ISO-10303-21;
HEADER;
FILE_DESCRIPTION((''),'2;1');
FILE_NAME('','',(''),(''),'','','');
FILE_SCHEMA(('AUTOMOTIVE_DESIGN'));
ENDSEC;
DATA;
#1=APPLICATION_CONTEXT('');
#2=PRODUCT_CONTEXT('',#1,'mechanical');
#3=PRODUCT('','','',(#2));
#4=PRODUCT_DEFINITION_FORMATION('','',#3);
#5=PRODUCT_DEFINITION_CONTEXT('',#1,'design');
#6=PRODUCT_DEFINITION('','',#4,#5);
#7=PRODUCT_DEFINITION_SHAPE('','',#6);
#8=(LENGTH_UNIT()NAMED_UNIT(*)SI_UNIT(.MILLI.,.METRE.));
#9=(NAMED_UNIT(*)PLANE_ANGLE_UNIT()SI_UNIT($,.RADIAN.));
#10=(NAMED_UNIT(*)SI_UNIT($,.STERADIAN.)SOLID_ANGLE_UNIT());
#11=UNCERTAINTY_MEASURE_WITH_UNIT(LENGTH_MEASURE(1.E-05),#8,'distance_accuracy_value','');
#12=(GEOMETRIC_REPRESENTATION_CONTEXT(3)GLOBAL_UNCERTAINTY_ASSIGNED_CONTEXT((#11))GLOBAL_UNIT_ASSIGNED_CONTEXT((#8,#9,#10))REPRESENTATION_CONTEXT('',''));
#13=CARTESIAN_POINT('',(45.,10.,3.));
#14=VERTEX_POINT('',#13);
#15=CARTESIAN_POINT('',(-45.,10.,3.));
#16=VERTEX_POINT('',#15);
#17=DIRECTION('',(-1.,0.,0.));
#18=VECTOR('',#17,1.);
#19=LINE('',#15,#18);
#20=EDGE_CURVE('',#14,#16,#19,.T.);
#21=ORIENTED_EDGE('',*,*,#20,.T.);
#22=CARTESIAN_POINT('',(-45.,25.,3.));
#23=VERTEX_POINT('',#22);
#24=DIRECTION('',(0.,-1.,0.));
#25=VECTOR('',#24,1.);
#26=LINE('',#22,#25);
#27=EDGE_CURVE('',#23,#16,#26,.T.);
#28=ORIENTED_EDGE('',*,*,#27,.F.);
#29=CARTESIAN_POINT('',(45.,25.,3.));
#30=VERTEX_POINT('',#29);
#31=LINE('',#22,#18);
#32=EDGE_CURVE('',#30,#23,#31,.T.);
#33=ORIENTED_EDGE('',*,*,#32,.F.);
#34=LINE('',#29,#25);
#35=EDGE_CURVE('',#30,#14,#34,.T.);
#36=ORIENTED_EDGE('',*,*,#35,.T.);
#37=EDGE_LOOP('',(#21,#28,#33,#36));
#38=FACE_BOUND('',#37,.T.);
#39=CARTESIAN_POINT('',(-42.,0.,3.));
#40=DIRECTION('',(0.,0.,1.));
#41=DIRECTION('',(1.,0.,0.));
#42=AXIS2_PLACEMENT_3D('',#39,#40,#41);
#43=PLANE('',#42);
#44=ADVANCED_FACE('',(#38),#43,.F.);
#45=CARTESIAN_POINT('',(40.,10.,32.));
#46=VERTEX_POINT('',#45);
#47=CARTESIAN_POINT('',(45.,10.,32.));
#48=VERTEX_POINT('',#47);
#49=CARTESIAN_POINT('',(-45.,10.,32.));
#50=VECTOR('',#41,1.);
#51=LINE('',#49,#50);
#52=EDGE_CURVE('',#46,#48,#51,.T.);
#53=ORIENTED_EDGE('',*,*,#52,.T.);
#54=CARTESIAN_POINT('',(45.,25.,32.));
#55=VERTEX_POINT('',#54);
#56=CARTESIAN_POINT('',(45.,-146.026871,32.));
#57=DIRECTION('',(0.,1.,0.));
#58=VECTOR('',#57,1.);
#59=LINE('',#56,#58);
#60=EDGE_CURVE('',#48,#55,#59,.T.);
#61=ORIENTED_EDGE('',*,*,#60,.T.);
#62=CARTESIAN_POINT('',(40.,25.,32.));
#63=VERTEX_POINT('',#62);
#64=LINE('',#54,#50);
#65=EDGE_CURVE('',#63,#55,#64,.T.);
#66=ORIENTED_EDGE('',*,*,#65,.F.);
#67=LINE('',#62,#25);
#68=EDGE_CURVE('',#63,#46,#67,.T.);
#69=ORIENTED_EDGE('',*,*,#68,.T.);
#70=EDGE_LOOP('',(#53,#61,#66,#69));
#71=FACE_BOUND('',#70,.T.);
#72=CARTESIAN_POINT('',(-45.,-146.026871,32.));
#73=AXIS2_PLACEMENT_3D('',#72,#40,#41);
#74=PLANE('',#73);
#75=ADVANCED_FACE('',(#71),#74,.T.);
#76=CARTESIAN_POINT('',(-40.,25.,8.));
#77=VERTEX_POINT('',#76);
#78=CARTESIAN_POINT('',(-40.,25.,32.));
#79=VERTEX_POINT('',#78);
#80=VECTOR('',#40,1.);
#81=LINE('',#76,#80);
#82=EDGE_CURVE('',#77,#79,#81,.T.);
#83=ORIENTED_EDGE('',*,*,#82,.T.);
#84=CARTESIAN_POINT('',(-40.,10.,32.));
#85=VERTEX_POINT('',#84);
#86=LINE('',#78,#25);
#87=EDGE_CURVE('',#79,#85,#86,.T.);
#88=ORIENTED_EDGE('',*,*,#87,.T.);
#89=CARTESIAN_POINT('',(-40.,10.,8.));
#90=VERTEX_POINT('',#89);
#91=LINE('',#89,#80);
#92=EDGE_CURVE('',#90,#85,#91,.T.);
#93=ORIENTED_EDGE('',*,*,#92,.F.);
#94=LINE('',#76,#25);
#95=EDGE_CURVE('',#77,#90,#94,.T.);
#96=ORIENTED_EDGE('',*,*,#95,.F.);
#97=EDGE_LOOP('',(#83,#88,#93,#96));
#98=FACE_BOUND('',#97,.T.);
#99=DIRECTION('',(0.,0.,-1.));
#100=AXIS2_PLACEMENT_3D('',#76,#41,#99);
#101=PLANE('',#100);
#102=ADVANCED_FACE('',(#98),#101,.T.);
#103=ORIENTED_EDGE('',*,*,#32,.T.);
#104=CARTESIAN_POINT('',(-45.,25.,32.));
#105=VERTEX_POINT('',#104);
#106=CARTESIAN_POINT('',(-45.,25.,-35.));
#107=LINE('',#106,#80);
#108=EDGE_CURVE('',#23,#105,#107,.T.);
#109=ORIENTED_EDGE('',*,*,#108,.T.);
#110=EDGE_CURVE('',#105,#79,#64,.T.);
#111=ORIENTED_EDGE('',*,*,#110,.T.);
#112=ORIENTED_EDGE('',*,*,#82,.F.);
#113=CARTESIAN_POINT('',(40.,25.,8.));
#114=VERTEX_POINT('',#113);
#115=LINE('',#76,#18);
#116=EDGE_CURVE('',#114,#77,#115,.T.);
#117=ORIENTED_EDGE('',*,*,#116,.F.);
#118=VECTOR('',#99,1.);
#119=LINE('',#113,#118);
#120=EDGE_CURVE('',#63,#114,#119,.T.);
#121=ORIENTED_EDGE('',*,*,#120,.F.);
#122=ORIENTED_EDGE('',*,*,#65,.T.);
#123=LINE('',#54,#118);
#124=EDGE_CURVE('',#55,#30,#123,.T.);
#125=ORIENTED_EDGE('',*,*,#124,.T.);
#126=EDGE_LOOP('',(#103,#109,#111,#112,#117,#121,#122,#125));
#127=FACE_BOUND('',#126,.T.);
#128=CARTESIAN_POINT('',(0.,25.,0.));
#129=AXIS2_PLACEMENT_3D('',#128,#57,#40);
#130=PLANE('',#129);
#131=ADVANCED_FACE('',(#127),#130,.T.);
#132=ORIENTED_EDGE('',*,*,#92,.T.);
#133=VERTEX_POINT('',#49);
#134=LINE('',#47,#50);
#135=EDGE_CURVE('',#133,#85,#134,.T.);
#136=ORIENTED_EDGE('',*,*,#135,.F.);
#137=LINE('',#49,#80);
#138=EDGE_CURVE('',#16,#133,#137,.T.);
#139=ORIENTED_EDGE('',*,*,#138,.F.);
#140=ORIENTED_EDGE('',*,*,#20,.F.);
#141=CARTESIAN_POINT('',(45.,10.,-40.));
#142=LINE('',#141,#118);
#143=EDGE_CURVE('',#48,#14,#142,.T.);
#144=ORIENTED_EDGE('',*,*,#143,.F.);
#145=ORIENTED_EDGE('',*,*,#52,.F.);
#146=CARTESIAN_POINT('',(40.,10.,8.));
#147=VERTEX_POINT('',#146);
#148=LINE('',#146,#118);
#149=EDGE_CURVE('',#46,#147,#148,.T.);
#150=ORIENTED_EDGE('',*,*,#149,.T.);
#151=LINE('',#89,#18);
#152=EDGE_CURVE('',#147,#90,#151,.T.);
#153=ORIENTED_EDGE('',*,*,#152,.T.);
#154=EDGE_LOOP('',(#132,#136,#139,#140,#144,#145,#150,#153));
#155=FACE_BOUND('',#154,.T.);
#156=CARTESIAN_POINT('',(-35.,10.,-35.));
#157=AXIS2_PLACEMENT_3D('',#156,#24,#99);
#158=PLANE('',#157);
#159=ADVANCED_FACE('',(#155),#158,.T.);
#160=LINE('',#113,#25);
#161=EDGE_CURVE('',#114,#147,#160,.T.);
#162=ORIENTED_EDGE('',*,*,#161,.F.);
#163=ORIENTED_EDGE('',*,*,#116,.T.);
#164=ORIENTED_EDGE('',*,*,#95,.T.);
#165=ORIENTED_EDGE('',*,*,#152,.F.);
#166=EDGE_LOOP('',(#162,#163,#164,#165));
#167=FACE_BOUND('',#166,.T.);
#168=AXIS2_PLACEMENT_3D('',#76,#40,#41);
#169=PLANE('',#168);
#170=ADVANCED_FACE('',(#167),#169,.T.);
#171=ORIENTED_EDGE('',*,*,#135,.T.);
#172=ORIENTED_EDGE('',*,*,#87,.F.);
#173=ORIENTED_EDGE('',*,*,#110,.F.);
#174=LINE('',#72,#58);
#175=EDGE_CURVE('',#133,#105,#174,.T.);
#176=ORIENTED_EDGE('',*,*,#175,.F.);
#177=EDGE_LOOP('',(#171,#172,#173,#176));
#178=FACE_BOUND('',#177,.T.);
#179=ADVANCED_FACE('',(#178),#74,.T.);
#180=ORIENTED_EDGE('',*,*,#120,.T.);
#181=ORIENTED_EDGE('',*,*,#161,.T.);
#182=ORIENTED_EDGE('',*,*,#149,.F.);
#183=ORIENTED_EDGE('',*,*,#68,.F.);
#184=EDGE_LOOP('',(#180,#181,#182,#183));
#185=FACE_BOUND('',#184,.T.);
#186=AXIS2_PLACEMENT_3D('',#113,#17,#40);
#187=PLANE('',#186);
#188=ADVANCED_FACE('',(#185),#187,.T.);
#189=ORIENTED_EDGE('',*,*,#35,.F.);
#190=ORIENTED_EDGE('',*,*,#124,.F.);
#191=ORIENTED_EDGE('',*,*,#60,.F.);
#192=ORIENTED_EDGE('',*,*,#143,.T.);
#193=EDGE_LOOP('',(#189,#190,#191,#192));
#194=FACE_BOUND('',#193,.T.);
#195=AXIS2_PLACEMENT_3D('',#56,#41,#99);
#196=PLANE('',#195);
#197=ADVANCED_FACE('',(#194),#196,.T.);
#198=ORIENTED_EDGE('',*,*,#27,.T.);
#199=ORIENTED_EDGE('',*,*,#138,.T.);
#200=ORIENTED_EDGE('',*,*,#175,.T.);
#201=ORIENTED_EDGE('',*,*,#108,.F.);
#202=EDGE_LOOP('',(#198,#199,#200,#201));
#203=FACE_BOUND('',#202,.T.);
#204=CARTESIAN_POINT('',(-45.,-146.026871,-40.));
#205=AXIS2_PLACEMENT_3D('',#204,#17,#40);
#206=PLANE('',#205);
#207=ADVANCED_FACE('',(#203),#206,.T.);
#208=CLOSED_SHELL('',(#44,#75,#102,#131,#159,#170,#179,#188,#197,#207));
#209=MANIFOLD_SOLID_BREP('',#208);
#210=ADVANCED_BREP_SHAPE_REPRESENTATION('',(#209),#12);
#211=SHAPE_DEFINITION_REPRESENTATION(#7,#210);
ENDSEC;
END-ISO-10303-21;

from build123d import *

# Parameters (mm, degrees)
BOSS_EXTRUDE1_DEPTH     = 10
SKETCH2_W               = 17.2
SKETCH2_H               = 43
CUT_EXTRUDE1_DEPTH      = 72.414284285
SKETCH3_W               = 90
SKETCH3_H               = 34
SKETCH3_W_2             = 80
SKETCH3_H_2             = 24
BOSS_EXTRUDE3_DEPTH     = 15
SKETCH4_W               = 49.6
SKETCH4_H               = 5
BOSS_EXTRUDE4_DEPTH     = 10
SKETCH5_W               = 15
SKETCH5_H               = 22
BOSS_EXTRUDE5_DEPTH     = 5
SKETCH6_W               = 90
SKETCH6_H               = 77
BOSS_EXTRUDE6_DEPTH     = 15
BOSS_EXTRUDE8_DEPTH     = 39
CHAMFER1_SIZE           = 64
CHAMFER1_SIZE_2         = 3.354097874
CHAMFER2_SIZE           = 64
CHAMFER2_SIZE_2         = 11.405813635
CHAMFER3_SIZE           = 64
CHAMFER3_SIZE_2         = 13.775745352
CUT_EXTRUDE3_DEPTH      = 95.500525601
CUT_EXTRUDE3_DEPTH_BACK = 95.500525601
SKETCH10_W              = 50
SKETCH10_H              = 27
SKETCH11_W              = 45.5
SKETCH11_H              = 10.5
CUT_EXTRUDE4_DEPTH      = 7.5
SKETCH14_W              = 2.05
SKETCH14_H              = 10.5
BOSS_EXTRUDE9_DEPTH     = 15
SKETCH15_R              = 8
CUT_EXTRUDE5_DEPTH      = 122.227059686
CUT_EXTRUDE6_DEPTH      = 2.5
CUT_EXTRUDE7_REACH      = 97.373
SKETCH18_W              = 29.6
SKETCH18_H              = 45
CUT_EXTRUDE8_DEPTH      = 15
SKETCH21_W              = 29.6
SKETCH21_H              = 15
BOSS_EXTRUDE10_DEPTH    = 2.5
SKETCH22_OUTSIDE_W      = 133.046
SKETCH22_OUTSIDE_H      = 133.046
SKETCH22_OUTSIDE_W_2    = 90
SKETCH22_OUTSIDE_H_2    = 72
CUT_EXTRUDE9_DEPTH      = 64
CUT_EXTRUDE10_DEPTH     = 10


with BuildPart() as part:
    # Sketch1 → Boss-Extrude1 (new body)
    with BuildSketch(Plane(origin=(0, 0, 0), x_dir=(1, 0, 0), z_dir=(0, 1, 0))):
        with BuildLine():
            Line((-35, 50), (35, 50))
            ThreePointArc((35, 50), (45.606601718, 45.606601718), (50, 35))
            Line((50, 35), (50, -35))
            ThreePointArc((50, -35), (45.606601718, -45.606601718), (35, -50))
            Line((35, -50), (-35, -50))
            ThreePointArc((-35, -50), (-45.606601718, -45.606601718), (-50, -35))
            Line((-50, -35), (-50, 35))
            ThreePointArc((-50, 35), (-45.606601718, 45.606601718), (-35, 50))
        make_face()
    extrude(amount=BOSS_EXTRUDE1_DEPTH)

    # Sketch2 → Cut-Extrude1 (cut, through all)
    with BuildSketch(Plane(origin=(0, 10, 0), x_dir=(1, 0, 0), z_dir=(0, 1, 0))):
        with Locations((-33.4, 18.5)):
            Rectangle(SKETCH2_W, SKETCH2_H)
        with Locations((33.4, 18.5)):
            Rectangle(SKETCH2_W, SKETCH2_H)
    extrude(amount=-CUT_EXTRUDE1_DEPTH, mode=Mode.SUBTRACT)

    # Sketch3 → Boss-Extrude3 (add)
    with BuildSketch(Plane(origin=(0, 10, 0), x_dir=(1, 0, 0), z_dir=(0, 1, 0))):
        with Locations((0, -20)):
            Rectangle(SKETCH3_W, SKETCH3_H)
        with Locations((0, -20)):
            Rectangle(SKETCH3_W_2, SKETCH3_H_2, mode=Mode.SUBTRACT)
    extrude(amount=BOSS_EXTRUDE3_DEPTH)

    # Sketch4 → Boss-Extrude4 (add)
    with BuildSketch(Plane(origin=(0, 10, 0), x_dir=(1, 0, 0), z_dir=(0, 1, 0))):
        with Locations((0, 10)):
            Rectangle(SKETCH4_W, SKETCH4_H)
        with Locations((0, 27)):
            Rectangle(SKETCH4_W, SKETCH4_H)
    extrude(amount=BOSS_EXTRUDE4_DEPTH)

    # Sketch5 → Boss-Extrude5 (add)
    with BuildSketch(Plane(origin=(0, 20, 0), x_dir=(1, 0, 0), z_dir=(0, 1, 0))):
        with Locations((-17.3, 18.5)):
            Rectangle(SKETCH5_W, SKETCH5_H)
        with Locations((17.3, 18.5)):
            Rectangle(SKETCH5_W, SKETCH5_H)
    extrude(amount=BOSS_EXTRUDE5_DEPTH)

    # Sketch6 → Boss-Extrude6 (add)
    with BuildSketch(Plane(origin=(0, 10, 0), x_dir=(1, 0, 0), z_dir=(0, 1, 0))):
        with BuildLine():
            Line((-50, 35), (-50, -35))
            ThreePointArc((-50, -35), (-45.606601718, -45.606601718), (-35, -50))
            Line((-35, -50), (35, -50))
            ThreePointArc((35, -50), (45.606601718, -45.606601718), (50, -35))
            Line((50, -35), (50, 35))
            ThreePointArc((50, 35), (45.606601718, 45.606601718), (35, 50))
            Line((35, 50), (-35, 50))
            ThreePointArc((-35, 50), (-45.606601718, 45.606601718), (-50, 35))
        make_face()
        with Locations((0, 1.5)):
            Rectangle(SKETCH6_W, SKETCH6_H, mode=Mode.SUBTRACT)
    extrude(amount=BOSS_EXTRUDE6_DEPTH)

    # Sketch9 → Boss-Extrude8 (add)
    with BuildSketch(Plane(origin=(0, 25, 0), x_dir=(1, 0, 0), z_dir=(0, 1, 0))):
        with BuildLine():
            Line((-50, 35), (-50, -35))
            ThreePointArc((-50, -35), (-45.606601718, -45.606601718), (-35, -50))
            Line((-35, -50), (35, -50))
            ThreePointArc((35, -50), (45.606601718, -45.606601718), (50, -35))
            Line((50, -35), (50, 35))
            ThreePointArc((50, 35), (45.606601718, 45.606601718), (35, 50))
            Line((35, 50), (-35, 50))
            ThreePointArc((-35, 50), (-45.606601718, 45.606601718), (-50, 35))
        make_face()
        with BuildLine():
            Line((-45, 35), (-45, -32))
            Line((-45, -32), (45, -32))
            Line((45, -32), (45, 35))
            ThreePointArc((45, 35), (44.659258263, 37.588190451), (43.660254038, 40))
            Line((43.660254038, 40), (-43.660254038, 40))
            ThreePointArc((-43.660254038, 40), (-44.659258263, 37.588190451), (-45, 35))
        make_face(mode=Mode.SUBTRACT)
    extrude(amount=BOSS_EXTRUDE8_DEPTH)

    # Chamfer1
    # the kernel refuses this chamfer: 64, 3.354097874 mm, written as the material it takes off along each edge
    with BuildSketch(Plane(origin=(-35, 64, 50), x_dir=(0, -0.9999979738662979, 0.002013023422382214), z_dir=(1, 0, 0)), Plane(origin=(50, 64, 35), x_dir=(0.002013023422382214, -0.9999979738662979, 0), z_dir=(0, 0, -1)), Plane(origin=(-50, 64, -35), x_dir=(-0.002013023422382214, -0.9999979738662979, 0), z_dir=(0, 0, 1)), Plane(origin=(35, 64, -50), x_dir=(0, -0.9999979738662979, -0.002013023422382214), z_dir=(-1, 0, 0))) as chamfer1_piece_1:
        Polygon((CHAMFER1_SIZE * 0.999997973866, CHAMFER1_SIZE * 0.00201302342238), (-CHAMFER1_SIZE_2 * 0.00201302342245, CHAMFER1_SIZE_2 * 0.9999979739), (0, 0), align=None)
    extrude(amount=70, mode=Mode.SUBTRACT)
    with BuildSketch(Plane(origin=(35, 64, 35), x_dir=(0, 0, 1), z_dir=(-1, 0, 0))) as chamfer1_piece_2:
        Polygon((15, -CHAMFER1_SIZE), (15 - CHAMFER1_SIZE_2, 0), (15, 0), align=None)
    revolve(axis=Axis((35, 64, 35), (0, 1, 0)), revolution_arc=90, mode=Mode.SUBTRACT)
    with BuildSketch(Plane(origin=(-35, 64, 35), x_dir=(-1, 0, 0), z_dir=(0, 0, -1))) as chamfer1_piece_3:
        Polygon((15, -CHAMFER1_SIZE), (15 - CHAMFER1_SIZE_2, 0), (15, 0), align=None)
    revolve(axis=Axis((-35, 64, 35), (0, 1, 0)), revolution_arc=90, mode=Mode.SUBTRACT)
    with BuildSketch(Plane(origin=(35, 64, -35), x_dir=(1, 0, 0), z_dir=(0, 0, 1))) as chamfer1_piece_4:
        Polygon((15, -CHAMFER1_SIZE), (15 - CHAMFER1_SIZE_2, 0), (15, 0), align=None)
    revolve(axis=Axis((35, 64, -35), (0, 1, 0)), revolution_arc=90, mode=Mode.SUBTRACT)
    with BuildSketch(Plane(origin=(-35, 64, -35), x_dir=(0, 0, -1), z_dir=(1, 0, 0))) as chamfer1_piece_5:
        Polygon((15 - CHAMFER1_SIZE_2, 0), (15, -CHAMFER1_SIZE), (15, 0), align=None)
    revolve(axis=Axis((-35, 64, -35), (0, 1, 0)), revolution_arc=90, mode=Mode.SUBTRACT)

    # Chamfer2
    # the kernel refuses this chamfer: 64, 11.405813635 mm, written as the material it takes off along each edge
    with BuildSketch(Plane(origin=(201.306482971, 64, -46.645902126), x_dir=(0, -0.9982575003065525, -0.05900816114499234), z_dir=(-1, 0, 0))) as chamfer2_piece_1:
        Polygon((CHAMFER2_SIZE * 0.999977671636, CHAMFER2_SIZE * 0.0066825316561), (-CHAMFER2_SIZE_2 * 0.0590081611462, CHAMFER2_SIZE_2 * 0.998257500326), (0, 0), align=None)
    extrude(amount=402.612965942, mode=Mode.SUBTRACT)

    # Chamfer3
    # the kernel refuses this chamfer: 64, 13.775745352 mm, written as the material it takes off along each edge
    with BuildSketch(Plane(origin=(-201.265469314, 64, 46.645902126), x_dir=(0, -0.9981787050157903, 0.06032638604292662), z_dir=(1, 0, 0))) as chamfer3_piece_1:
        Polygon((CHAMFER3_SIZE * 0.999967974892, CHAMFER3_SIZE * 0.00800307379952), (-CHAMFER3_SIZE_2 * 0.060326386045, CHAMFER3_SIZE_2 * 0.99817870505), (0, 0), align=None)
    extrude(amount=402.530938629, mode=Mode.SUBTRACT)

    # Sketch10 → Cut-Extrude3 (cut, two sides: drawn at the far end of the back side and taken through both)
    with BuildSketch(Plane(origin=(0, 1.307501734, 0), x_dir=(0, 0, 1), z_dir=(-1, 0, 0)).offset(-CUT_EXTRUDE3_DEPTH_BACK)):
        with Locations((-22.129843227, 49.192498266)):
            Rectangle(SKETCH10_W, SKETCH10_H)
    extrude(amount=CUT_EXTRUDE3_DEPTH + CUT_EXTRUDE3_DEPTH_BACK, mode=Mode.SUBTRACT)

    # Sketch11 → Cut-Extrude4 (cut)
    with BuildSketch(Plane(origin=(0, 10, 0), x_dir=(1, 0, 0), z_dir=(0, 1, 0))):
        with Locations((0, 34.75)):
            Rectangle(SKETCH11_W, SKETCH11_H)
    extrude(amount=-CUT_EXTRUDE4_DEPTH, mode=Mode.SUBTRACT)

    # Sketch14 → Boss-Extrude9 (add)
    with BuildSketch(Plane(origin=(0, 10, 0), x_dir=(1, 0, 0), z_dir=(0, 1, 0))):
        with Locations((-23.775, 34.75)):
            Rectangle(SKETCH14_W, SKETCH14_H)
        with Locations((23.775, 34.75)):
            Rectangle(SKETCH14_W, SKETCH14_H)
    extrude(amount=BOSS_EXTRUDE9_DEPTH)

    # Sketch15 → Cut-Extrude5 (cut, through all)
    with BuildSketch(Plane.XY.offset(-40)):
        with Locations((-12.75, 12.75)):
            Circle(SKETCH15_R)
        with Locations((12.75, 12.75)):
            Circle(SKETCH15_R)
    extrude(amount=-CUT_EXTRUDE5_DEPTH, mode=Mode.SUBTRACT)

    # Sketch17 → Cut-Extrude6 (cut)
    with BuildSketch(Plane(origin=(0, 0, -29.5), x_dir=(-1, 0, 0), z_dir=(0, 0, -1))):
        Polygon((-9.8, 25), (-22.75, 25), (-22.75, 2.5), (22.75, 2.5), (22.75, 25), (9.8, 25), (9.8, 20), (-9.8, 20), align=None)
    extrude(amount=-CUT_EXTRUDE6_DEPTH, mode=Mode.SUBTRACT)

    # Cut-Extrude7: up to this face of the body (flat: up to its plane)
    cut_extrude7_end = Plane(part.part.faces().sort_by_distance((0, 10, -18.5))[0])
    # Sketch18 → Cut-Extrude7 (cut, up to the picked face)
    with BuildSketch(Plane.XZ, mode=Mode.PRIVATE) as cut_extrude7_sk1:
        with Locations((0, -4.5)):
            Rectangle(SKETCH18_W, SKETCH18_H)
    cut_extrude7_tool1 = split(extrude(cut_extrude7_sk1.sketch, amount=-CUT_EXTRUDE7_REACH, mode=Mode.PRIVATE), bisect_by=cut_extrude7_end, keep=Keep.BOTH, mode=Mode.PRIVATE)
    add(cut_extrude7_tool1.solids().sort_by(Axis((0, 0, -4.5), (0, 1, 0)))[0], mode=Mode.SUBTRACT)

    # Sketch20 → Cut-Extrude8 (cut)
    with BuildSketch(Plane.XZ.offset(-25)):
        with BuildLine():
            Line((-45, -35), (-45, -40))
            Line((-45, -40), (-43.660254038, -40))
            ThreePointArc((-43.660254038, -40), (-44.659258263, -37.588190451), (-45, -35))
        make_face()
        with BuildLine():
            Line((45, -40), (45, -35))
            ThreePointArc((45, -35), (44.659258263, -37.588190451), (43.660254038, -40))
            Line((43.660254038, -40), (45, -40))
        make_face()
    extrude(amount=-CUT_EXTRUDE8_DEPTH, mode=Mode.SUBTRACT)

    # Sketch21 → Boss-Extrude10 (add)
    with BuildSketch(Plane.XZ):
        with Locations((0, -4.5)):
            Rectangle(SKETCH21_W, SKETCH21_H)
    extrude(amount=-BOSS_EXTRUDE10_DEPTH)

    # Sketch22 outside → Cut-Extrude9 (cut)
    with BuildSketch(Plane(origin=(0, 64, 0), x_dir=(1, 0, 0), z_dir=(0, 1, 0))):
        Rectangle(SKETCH22_OUTSIDE_W, SKETCH22_OUTSIDE_H)
        with Locations((0, 4)):
            Rectangle(SKETCH22_OUTSIDE_W_2, SKETCH22_OUTSIDE_H_2, mode=Mode.SUBTRACT)
    extrude(amount=-CUT_EXTRUDE9_DEPTH, mode=Mode.SUBTRACT)

    # Sketch23 → Cut-Extrude10 (cut)
    with BuildSketch(Plane.XZ):
        Polygon((-24.8, 3), (-24.8, -40), (24.8, -40), (24.8, 3), (42, 3), (42, -40), (45, -40), (45, 32), (-45, 32), (-45, -40), (-42, -40), (-42, 3), align=None)
    extrude(amount=-CUT_EXTRUDE10_DEPTH, mode=Mode.SUBTRACT)


with BuildPart() as cut_extrude10_piece_1:
    # of the separate pieces the step leaves, piece 1, a body of its own (cut_extrude10_pieces)
    add(part.part.solids().sort_by_distance((45, 10, 3))[0])


with BuildPart() as cut_extrude10_piece_2:
    # of the separate pieces the step leaves, piece 2, a body of its own (cut_extrude10_pieces)
    add(part.part.solids().sort_by_distance((24.8, 25, -7.5))[0])


solid = cut_extrude10_piece_1.part
